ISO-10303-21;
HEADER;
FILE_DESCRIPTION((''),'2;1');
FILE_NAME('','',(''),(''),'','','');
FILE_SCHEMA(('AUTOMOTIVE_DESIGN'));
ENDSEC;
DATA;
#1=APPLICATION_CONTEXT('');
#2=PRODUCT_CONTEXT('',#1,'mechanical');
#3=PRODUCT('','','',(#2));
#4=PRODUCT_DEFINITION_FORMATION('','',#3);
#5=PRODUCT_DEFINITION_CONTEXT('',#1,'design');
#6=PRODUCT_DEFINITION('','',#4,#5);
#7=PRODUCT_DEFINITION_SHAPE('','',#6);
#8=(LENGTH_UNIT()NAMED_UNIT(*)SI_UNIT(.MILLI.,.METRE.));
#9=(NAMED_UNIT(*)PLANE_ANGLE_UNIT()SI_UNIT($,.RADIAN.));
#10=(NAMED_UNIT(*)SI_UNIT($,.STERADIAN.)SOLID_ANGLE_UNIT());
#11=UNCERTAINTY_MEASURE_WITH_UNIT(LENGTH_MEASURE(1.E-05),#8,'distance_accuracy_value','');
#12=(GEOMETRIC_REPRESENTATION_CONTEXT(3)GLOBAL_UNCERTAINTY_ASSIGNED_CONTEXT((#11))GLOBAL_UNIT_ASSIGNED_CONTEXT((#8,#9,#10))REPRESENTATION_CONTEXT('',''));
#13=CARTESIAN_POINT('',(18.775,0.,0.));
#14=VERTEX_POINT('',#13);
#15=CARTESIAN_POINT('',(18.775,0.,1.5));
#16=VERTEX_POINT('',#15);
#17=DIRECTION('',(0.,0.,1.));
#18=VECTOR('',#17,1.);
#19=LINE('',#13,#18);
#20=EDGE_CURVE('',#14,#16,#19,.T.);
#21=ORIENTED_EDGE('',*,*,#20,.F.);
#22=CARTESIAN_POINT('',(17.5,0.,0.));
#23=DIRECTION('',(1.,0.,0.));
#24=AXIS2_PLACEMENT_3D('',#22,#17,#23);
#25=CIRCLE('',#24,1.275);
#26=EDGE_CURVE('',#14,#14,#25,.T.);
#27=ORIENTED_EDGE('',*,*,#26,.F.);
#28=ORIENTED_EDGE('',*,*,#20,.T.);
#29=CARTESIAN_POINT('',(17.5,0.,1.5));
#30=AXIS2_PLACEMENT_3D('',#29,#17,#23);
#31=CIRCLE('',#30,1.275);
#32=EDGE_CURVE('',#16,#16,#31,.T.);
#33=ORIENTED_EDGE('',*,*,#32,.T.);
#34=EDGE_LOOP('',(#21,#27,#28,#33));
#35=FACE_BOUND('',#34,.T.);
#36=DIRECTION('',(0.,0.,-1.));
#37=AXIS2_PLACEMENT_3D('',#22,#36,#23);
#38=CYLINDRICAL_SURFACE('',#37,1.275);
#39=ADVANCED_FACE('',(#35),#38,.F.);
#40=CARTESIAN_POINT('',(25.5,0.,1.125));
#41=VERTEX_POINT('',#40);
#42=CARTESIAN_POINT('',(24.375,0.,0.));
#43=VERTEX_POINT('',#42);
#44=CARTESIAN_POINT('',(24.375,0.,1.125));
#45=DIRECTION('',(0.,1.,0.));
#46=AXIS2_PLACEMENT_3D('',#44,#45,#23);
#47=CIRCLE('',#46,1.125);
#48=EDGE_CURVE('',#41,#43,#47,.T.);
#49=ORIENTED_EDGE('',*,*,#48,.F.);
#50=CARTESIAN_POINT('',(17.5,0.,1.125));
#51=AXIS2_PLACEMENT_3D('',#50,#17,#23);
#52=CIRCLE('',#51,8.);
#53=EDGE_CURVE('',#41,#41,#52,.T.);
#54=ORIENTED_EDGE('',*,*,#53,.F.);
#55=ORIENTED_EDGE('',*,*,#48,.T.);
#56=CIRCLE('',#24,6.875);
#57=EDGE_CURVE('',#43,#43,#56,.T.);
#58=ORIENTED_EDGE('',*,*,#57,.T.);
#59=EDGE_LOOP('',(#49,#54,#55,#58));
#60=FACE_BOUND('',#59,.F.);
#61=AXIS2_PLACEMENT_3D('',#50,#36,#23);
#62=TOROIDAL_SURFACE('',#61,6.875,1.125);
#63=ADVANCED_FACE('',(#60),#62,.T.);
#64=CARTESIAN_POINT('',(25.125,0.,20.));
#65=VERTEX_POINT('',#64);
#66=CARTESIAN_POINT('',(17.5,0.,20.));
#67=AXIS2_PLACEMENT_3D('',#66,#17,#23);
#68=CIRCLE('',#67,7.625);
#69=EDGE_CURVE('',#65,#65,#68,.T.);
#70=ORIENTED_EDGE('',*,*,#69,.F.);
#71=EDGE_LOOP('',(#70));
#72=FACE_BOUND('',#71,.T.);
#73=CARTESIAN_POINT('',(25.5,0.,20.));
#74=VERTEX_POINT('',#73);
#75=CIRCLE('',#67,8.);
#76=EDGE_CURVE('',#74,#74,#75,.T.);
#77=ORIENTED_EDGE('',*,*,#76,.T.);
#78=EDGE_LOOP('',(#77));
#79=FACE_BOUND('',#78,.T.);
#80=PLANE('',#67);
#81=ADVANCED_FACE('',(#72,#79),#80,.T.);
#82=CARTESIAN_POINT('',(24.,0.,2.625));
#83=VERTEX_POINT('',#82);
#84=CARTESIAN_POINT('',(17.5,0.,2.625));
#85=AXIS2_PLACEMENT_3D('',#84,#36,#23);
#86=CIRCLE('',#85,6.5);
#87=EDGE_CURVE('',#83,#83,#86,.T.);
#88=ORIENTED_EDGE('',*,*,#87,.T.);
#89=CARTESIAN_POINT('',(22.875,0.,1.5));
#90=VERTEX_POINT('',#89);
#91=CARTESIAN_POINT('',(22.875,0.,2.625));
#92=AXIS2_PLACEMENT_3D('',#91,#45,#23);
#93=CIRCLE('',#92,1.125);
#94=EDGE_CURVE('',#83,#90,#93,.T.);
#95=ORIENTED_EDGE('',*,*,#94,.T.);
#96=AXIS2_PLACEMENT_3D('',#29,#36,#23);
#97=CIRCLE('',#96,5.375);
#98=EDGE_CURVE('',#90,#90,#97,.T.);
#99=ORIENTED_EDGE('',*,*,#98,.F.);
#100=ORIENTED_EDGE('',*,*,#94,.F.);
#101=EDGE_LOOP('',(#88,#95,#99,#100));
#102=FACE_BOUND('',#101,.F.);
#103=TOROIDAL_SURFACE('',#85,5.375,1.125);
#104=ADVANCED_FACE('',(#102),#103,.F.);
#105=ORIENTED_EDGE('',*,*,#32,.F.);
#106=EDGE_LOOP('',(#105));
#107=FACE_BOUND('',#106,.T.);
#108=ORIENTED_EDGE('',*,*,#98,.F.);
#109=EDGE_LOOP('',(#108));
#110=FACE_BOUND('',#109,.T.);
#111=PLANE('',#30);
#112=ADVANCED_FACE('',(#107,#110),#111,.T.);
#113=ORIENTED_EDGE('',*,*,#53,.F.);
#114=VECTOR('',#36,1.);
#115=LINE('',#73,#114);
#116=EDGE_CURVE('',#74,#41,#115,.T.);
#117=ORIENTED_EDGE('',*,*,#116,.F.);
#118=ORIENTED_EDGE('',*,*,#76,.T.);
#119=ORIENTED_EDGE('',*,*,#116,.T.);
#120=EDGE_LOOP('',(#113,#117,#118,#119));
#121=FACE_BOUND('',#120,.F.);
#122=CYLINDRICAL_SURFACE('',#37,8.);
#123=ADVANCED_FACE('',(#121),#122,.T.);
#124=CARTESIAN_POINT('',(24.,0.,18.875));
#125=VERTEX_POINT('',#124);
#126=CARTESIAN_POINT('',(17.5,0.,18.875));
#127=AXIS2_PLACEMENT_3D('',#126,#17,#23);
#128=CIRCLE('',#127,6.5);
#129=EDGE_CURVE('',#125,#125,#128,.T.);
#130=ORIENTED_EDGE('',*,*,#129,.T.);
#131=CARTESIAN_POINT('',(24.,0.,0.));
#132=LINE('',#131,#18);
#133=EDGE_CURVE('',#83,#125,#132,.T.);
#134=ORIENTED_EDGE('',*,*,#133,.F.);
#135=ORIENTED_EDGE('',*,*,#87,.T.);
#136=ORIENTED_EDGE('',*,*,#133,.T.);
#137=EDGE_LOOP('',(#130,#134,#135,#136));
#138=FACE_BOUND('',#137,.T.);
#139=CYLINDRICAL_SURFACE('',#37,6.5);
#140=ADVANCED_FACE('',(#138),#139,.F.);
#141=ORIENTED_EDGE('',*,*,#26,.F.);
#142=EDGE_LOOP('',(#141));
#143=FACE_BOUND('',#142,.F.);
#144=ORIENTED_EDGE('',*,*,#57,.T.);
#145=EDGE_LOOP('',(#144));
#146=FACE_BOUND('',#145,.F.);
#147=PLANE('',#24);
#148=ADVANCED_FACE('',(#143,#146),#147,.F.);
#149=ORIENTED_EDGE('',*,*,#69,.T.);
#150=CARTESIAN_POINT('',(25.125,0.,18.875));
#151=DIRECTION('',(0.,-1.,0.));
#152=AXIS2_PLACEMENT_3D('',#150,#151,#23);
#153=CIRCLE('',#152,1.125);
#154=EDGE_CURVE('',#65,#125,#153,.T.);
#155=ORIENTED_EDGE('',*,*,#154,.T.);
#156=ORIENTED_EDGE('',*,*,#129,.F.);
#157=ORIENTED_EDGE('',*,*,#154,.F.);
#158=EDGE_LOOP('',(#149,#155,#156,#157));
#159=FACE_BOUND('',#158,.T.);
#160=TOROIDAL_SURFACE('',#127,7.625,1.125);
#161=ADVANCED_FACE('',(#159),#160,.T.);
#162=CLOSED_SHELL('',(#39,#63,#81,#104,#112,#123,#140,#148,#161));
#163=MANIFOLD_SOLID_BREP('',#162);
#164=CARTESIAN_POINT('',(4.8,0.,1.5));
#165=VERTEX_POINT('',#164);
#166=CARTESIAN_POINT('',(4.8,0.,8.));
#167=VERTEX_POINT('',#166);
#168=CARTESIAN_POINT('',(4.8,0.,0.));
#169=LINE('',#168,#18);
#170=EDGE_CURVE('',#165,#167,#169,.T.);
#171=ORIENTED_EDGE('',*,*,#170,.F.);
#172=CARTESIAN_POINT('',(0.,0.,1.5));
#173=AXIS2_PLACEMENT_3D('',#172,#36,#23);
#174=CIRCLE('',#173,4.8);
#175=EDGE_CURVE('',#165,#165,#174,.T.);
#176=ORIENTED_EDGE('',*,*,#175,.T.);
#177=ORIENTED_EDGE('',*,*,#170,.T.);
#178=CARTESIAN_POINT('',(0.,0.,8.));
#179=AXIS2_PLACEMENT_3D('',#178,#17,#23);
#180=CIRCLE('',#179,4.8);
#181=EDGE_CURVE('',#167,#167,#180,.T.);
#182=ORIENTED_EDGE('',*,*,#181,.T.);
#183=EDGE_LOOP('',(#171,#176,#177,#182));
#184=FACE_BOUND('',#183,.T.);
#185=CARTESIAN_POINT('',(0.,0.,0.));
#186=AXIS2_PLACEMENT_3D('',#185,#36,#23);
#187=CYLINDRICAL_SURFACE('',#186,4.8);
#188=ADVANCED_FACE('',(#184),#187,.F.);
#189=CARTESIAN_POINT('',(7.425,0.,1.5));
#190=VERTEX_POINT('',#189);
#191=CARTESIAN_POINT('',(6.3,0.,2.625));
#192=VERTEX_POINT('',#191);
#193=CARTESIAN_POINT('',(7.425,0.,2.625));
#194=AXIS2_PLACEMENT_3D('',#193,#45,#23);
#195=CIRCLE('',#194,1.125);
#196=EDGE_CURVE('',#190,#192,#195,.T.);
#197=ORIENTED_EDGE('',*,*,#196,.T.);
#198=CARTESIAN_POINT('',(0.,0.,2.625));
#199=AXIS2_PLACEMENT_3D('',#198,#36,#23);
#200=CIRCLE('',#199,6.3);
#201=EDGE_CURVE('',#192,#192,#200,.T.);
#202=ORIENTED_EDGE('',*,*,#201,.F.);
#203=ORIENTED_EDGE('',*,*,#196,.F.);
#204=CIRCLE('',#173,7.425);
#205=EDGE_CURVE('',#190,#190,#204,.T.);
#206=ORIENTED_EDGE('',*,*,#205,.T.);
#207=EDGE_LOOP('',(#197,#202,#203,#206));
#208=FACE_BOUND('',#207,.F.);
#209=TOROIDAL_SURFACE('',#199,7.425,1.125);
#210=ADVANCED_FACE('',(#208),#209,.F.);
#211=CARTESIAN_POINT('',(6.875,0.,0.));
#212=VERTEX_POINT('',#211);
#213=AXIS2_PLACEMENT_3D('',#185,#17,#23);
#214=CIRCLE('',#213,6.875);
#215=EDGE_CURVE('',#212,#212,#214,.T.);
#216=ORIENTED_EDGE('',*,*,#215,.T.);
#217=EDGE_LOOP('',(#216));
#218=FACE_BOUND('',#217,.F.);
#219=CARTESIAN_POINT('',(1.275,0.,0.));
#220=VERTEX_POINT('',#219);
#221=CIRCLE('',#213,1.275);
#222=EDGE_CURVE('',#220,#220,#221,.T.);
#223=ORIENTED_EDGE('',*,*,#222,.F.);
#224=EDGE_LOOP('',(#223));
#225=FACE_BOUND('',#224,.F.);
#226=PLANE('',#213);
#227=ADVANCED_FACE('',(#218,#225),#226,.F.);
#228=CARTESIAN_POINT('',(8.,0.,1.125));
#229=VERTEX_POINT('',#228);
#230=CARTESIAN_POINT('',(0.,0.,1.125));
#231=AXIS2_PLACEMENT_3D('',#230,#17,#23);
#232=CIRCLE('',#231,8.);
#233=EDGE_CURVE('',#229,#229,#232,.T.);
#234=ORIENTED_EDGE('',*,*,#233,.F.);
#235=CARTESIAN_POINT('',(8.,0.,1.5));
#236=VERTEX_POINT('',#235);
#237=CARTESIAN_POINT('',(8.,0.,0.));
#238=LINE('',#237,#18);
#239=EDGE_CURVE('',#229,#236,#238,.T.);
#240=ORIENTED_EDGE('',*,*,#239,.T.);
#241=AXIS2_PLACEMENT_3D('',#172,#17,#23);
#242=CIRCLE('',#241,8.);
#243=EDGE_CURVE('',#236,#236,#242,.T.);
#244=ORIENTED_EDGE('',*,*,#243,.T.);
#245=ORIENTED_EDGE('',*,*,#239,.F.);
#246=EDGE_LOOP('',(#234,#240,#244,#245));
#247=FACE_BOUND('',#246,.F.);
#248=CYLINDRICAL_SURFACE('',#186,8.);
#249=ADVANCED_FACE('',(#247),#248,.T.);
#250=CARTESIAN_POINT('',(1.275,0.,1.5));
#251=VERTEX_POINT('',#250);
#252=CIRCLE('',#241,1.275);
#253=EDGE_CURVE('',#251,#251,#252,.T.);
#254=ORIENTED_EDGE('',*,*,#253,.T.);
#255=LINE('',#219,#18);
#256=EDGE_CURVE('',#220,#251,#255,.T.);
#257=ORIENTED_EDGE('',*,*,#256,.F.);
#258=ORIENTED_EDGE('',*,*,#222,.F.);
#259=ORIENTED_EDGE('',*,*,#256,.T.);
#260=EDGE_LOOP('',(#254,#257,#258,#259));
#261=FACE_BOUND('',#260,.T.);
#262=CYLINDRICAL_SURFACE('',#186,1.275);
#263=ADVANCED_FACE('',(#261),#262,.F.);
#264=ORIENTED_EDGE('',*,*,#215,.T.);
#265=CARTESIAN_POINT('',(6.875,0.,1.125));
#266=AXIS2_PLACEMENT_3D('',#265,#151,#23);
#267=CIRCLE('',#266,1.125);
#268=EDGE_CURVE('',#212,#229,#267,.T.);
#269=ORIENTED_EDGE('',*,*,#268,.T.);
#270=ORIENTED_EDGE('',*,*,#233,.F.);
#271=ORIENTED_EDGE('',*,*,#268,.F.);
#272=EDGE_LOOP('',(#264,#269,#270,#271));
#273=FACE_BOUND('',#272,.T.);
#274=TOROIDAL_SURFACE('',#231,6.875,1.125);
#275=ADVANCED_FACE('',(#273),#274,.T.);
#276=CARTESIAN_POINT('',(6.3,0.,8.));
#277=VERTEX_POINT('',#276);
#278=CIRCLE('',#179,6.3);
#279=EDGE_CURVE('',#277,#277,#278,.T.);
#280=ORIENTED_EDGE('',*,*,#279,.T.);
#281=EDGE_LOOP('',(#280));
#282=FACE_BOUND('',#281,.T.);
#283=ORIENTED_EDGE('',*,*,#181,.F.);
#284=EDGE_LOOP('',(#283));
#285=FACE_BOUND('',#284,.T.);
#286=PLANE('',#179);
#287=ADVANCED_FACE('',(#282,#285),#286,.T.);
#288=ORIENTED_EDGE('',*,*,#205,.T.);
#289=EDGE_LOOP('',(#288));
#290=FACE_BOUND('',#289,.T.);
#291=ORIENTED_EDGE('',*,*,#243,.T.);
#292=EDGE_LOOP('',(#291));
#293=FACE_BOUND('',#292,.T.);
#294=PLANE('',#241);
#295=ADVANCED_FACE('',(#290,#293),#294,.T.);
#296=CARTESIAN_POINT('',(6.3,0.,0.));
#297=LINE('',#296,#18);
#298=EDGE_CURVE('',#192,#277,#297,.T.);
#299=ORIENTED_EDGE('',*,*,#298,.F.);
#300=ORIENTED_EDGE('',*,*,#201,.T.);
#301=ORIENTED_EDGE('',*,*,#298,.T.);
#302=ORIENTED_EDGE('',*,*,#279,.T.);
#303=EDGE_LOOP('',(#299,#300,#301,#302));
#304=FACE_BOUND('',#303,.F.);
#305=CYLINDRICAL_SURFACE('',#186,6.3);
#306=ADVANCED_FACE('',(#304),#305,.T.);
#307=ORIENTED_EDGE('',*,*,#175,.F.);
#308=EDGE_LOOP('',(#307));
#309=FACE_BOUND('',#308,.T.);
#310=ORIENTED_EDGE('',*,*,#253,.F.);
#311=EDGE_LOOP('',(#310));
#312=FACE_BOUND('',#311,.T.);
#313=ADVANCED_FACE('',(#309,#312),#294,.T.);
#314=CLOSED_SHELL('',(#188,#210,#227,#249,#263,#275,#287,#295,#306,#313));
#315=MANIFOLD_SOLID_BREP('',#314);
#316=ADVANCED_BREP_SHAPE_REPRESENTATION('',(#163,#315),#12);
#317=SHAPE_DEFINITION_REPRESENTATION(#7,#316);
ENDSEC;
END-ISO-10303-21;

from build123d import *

# Parameters (mm, degrees)
F4_R     = 8
F4_R_2   = 6.5
F4_R_3   = 6.3
F4_R_4   = 4.8
F4_R_5   = 1.275
F5_DEPTH = 1.5
F6_DEPTH = 20
F8_DEPTH = 1.5
F9_DEPTH = 8
F10_R    = 1.125
F10_2_R  = 1.125


with BuildPart() as f5:
    # F4 (on Top) → F5 (new body)
    with BuildSketch(Plane.XY):
        Circle(F4_R)
        Circle(F4_R_2, mode=Mode.SUBTRACT)
        Circle(F4_R_2)
        Circle(F4_R_3, mode=Mode.SUBTRACT)
        Circle(F4_R_3)
        Circle(F4_R_4, mode=Mode.SUBTRACT)
        Circle(F4_R_4)
        Circle(F4_R_5, mode=Mode.SUBTRACT)
    extrude(amount=F5_DEPTH)

    # F4 (on Top) → F6 (join)
    with BuildSketch(Plane.XY):
        Circle(F4_R)
        Circle(F4_R_2, mode=Mode.SUBTRACT)
    extrude(amount=F6_DEPTH)


with BuildPart() as f5_1:
    # F7: moved
    add(f5.part.moved(Location((17.5, 0, 0))))

    # F10
    f10_edges = [f5_1.edges().sort_by_distance(p)[0] for p in [
        (9.5, 0, 0),
        (11, 0, 20),
        (11, 0, 1.5),
    ]]
    fillet(f10_edges, radius=F10_R)


with BuildPart() as f8:
    # F4 (on Top) → F8 (new body)
    with BuildSketch(Plane.XY):
        Circle(F4_R)
        Circle(F4_R_2, mode=Mode.SUBTRACT)
        Circle(F4_R_2)
        Circle(F4_R_3, mode=Mode.SUBTRACT)
        Circle(F4_R_3)
        Circle(F4_R_4, mode=Mode.SUBTRACT)
        Circle(F4_R_4)
        Circle(F4_R_5, mode=Mode.SUBTRACT)
    extrude(amount=F8_DEPTH)

    # F4 (on Top) → F9 (join)
    with BuildSketch(Plane.XY):
        Circle(F4_R_3)
        Circle(F4_R_4, mode=Mode.SUBTRACT)
    extrude(amount=F9_DEPTH)

    # F10#2
    f10_2_edges = [f8.edges().sort_by_distance(p)[0] for p in [
        (-8, 0, 0),
        (-6.3, 0, 1.5),
    ]]
    fillet(f10_2_edges, radius=F10_2_R)


solid = Compound([f5_1.part, f8.part])
